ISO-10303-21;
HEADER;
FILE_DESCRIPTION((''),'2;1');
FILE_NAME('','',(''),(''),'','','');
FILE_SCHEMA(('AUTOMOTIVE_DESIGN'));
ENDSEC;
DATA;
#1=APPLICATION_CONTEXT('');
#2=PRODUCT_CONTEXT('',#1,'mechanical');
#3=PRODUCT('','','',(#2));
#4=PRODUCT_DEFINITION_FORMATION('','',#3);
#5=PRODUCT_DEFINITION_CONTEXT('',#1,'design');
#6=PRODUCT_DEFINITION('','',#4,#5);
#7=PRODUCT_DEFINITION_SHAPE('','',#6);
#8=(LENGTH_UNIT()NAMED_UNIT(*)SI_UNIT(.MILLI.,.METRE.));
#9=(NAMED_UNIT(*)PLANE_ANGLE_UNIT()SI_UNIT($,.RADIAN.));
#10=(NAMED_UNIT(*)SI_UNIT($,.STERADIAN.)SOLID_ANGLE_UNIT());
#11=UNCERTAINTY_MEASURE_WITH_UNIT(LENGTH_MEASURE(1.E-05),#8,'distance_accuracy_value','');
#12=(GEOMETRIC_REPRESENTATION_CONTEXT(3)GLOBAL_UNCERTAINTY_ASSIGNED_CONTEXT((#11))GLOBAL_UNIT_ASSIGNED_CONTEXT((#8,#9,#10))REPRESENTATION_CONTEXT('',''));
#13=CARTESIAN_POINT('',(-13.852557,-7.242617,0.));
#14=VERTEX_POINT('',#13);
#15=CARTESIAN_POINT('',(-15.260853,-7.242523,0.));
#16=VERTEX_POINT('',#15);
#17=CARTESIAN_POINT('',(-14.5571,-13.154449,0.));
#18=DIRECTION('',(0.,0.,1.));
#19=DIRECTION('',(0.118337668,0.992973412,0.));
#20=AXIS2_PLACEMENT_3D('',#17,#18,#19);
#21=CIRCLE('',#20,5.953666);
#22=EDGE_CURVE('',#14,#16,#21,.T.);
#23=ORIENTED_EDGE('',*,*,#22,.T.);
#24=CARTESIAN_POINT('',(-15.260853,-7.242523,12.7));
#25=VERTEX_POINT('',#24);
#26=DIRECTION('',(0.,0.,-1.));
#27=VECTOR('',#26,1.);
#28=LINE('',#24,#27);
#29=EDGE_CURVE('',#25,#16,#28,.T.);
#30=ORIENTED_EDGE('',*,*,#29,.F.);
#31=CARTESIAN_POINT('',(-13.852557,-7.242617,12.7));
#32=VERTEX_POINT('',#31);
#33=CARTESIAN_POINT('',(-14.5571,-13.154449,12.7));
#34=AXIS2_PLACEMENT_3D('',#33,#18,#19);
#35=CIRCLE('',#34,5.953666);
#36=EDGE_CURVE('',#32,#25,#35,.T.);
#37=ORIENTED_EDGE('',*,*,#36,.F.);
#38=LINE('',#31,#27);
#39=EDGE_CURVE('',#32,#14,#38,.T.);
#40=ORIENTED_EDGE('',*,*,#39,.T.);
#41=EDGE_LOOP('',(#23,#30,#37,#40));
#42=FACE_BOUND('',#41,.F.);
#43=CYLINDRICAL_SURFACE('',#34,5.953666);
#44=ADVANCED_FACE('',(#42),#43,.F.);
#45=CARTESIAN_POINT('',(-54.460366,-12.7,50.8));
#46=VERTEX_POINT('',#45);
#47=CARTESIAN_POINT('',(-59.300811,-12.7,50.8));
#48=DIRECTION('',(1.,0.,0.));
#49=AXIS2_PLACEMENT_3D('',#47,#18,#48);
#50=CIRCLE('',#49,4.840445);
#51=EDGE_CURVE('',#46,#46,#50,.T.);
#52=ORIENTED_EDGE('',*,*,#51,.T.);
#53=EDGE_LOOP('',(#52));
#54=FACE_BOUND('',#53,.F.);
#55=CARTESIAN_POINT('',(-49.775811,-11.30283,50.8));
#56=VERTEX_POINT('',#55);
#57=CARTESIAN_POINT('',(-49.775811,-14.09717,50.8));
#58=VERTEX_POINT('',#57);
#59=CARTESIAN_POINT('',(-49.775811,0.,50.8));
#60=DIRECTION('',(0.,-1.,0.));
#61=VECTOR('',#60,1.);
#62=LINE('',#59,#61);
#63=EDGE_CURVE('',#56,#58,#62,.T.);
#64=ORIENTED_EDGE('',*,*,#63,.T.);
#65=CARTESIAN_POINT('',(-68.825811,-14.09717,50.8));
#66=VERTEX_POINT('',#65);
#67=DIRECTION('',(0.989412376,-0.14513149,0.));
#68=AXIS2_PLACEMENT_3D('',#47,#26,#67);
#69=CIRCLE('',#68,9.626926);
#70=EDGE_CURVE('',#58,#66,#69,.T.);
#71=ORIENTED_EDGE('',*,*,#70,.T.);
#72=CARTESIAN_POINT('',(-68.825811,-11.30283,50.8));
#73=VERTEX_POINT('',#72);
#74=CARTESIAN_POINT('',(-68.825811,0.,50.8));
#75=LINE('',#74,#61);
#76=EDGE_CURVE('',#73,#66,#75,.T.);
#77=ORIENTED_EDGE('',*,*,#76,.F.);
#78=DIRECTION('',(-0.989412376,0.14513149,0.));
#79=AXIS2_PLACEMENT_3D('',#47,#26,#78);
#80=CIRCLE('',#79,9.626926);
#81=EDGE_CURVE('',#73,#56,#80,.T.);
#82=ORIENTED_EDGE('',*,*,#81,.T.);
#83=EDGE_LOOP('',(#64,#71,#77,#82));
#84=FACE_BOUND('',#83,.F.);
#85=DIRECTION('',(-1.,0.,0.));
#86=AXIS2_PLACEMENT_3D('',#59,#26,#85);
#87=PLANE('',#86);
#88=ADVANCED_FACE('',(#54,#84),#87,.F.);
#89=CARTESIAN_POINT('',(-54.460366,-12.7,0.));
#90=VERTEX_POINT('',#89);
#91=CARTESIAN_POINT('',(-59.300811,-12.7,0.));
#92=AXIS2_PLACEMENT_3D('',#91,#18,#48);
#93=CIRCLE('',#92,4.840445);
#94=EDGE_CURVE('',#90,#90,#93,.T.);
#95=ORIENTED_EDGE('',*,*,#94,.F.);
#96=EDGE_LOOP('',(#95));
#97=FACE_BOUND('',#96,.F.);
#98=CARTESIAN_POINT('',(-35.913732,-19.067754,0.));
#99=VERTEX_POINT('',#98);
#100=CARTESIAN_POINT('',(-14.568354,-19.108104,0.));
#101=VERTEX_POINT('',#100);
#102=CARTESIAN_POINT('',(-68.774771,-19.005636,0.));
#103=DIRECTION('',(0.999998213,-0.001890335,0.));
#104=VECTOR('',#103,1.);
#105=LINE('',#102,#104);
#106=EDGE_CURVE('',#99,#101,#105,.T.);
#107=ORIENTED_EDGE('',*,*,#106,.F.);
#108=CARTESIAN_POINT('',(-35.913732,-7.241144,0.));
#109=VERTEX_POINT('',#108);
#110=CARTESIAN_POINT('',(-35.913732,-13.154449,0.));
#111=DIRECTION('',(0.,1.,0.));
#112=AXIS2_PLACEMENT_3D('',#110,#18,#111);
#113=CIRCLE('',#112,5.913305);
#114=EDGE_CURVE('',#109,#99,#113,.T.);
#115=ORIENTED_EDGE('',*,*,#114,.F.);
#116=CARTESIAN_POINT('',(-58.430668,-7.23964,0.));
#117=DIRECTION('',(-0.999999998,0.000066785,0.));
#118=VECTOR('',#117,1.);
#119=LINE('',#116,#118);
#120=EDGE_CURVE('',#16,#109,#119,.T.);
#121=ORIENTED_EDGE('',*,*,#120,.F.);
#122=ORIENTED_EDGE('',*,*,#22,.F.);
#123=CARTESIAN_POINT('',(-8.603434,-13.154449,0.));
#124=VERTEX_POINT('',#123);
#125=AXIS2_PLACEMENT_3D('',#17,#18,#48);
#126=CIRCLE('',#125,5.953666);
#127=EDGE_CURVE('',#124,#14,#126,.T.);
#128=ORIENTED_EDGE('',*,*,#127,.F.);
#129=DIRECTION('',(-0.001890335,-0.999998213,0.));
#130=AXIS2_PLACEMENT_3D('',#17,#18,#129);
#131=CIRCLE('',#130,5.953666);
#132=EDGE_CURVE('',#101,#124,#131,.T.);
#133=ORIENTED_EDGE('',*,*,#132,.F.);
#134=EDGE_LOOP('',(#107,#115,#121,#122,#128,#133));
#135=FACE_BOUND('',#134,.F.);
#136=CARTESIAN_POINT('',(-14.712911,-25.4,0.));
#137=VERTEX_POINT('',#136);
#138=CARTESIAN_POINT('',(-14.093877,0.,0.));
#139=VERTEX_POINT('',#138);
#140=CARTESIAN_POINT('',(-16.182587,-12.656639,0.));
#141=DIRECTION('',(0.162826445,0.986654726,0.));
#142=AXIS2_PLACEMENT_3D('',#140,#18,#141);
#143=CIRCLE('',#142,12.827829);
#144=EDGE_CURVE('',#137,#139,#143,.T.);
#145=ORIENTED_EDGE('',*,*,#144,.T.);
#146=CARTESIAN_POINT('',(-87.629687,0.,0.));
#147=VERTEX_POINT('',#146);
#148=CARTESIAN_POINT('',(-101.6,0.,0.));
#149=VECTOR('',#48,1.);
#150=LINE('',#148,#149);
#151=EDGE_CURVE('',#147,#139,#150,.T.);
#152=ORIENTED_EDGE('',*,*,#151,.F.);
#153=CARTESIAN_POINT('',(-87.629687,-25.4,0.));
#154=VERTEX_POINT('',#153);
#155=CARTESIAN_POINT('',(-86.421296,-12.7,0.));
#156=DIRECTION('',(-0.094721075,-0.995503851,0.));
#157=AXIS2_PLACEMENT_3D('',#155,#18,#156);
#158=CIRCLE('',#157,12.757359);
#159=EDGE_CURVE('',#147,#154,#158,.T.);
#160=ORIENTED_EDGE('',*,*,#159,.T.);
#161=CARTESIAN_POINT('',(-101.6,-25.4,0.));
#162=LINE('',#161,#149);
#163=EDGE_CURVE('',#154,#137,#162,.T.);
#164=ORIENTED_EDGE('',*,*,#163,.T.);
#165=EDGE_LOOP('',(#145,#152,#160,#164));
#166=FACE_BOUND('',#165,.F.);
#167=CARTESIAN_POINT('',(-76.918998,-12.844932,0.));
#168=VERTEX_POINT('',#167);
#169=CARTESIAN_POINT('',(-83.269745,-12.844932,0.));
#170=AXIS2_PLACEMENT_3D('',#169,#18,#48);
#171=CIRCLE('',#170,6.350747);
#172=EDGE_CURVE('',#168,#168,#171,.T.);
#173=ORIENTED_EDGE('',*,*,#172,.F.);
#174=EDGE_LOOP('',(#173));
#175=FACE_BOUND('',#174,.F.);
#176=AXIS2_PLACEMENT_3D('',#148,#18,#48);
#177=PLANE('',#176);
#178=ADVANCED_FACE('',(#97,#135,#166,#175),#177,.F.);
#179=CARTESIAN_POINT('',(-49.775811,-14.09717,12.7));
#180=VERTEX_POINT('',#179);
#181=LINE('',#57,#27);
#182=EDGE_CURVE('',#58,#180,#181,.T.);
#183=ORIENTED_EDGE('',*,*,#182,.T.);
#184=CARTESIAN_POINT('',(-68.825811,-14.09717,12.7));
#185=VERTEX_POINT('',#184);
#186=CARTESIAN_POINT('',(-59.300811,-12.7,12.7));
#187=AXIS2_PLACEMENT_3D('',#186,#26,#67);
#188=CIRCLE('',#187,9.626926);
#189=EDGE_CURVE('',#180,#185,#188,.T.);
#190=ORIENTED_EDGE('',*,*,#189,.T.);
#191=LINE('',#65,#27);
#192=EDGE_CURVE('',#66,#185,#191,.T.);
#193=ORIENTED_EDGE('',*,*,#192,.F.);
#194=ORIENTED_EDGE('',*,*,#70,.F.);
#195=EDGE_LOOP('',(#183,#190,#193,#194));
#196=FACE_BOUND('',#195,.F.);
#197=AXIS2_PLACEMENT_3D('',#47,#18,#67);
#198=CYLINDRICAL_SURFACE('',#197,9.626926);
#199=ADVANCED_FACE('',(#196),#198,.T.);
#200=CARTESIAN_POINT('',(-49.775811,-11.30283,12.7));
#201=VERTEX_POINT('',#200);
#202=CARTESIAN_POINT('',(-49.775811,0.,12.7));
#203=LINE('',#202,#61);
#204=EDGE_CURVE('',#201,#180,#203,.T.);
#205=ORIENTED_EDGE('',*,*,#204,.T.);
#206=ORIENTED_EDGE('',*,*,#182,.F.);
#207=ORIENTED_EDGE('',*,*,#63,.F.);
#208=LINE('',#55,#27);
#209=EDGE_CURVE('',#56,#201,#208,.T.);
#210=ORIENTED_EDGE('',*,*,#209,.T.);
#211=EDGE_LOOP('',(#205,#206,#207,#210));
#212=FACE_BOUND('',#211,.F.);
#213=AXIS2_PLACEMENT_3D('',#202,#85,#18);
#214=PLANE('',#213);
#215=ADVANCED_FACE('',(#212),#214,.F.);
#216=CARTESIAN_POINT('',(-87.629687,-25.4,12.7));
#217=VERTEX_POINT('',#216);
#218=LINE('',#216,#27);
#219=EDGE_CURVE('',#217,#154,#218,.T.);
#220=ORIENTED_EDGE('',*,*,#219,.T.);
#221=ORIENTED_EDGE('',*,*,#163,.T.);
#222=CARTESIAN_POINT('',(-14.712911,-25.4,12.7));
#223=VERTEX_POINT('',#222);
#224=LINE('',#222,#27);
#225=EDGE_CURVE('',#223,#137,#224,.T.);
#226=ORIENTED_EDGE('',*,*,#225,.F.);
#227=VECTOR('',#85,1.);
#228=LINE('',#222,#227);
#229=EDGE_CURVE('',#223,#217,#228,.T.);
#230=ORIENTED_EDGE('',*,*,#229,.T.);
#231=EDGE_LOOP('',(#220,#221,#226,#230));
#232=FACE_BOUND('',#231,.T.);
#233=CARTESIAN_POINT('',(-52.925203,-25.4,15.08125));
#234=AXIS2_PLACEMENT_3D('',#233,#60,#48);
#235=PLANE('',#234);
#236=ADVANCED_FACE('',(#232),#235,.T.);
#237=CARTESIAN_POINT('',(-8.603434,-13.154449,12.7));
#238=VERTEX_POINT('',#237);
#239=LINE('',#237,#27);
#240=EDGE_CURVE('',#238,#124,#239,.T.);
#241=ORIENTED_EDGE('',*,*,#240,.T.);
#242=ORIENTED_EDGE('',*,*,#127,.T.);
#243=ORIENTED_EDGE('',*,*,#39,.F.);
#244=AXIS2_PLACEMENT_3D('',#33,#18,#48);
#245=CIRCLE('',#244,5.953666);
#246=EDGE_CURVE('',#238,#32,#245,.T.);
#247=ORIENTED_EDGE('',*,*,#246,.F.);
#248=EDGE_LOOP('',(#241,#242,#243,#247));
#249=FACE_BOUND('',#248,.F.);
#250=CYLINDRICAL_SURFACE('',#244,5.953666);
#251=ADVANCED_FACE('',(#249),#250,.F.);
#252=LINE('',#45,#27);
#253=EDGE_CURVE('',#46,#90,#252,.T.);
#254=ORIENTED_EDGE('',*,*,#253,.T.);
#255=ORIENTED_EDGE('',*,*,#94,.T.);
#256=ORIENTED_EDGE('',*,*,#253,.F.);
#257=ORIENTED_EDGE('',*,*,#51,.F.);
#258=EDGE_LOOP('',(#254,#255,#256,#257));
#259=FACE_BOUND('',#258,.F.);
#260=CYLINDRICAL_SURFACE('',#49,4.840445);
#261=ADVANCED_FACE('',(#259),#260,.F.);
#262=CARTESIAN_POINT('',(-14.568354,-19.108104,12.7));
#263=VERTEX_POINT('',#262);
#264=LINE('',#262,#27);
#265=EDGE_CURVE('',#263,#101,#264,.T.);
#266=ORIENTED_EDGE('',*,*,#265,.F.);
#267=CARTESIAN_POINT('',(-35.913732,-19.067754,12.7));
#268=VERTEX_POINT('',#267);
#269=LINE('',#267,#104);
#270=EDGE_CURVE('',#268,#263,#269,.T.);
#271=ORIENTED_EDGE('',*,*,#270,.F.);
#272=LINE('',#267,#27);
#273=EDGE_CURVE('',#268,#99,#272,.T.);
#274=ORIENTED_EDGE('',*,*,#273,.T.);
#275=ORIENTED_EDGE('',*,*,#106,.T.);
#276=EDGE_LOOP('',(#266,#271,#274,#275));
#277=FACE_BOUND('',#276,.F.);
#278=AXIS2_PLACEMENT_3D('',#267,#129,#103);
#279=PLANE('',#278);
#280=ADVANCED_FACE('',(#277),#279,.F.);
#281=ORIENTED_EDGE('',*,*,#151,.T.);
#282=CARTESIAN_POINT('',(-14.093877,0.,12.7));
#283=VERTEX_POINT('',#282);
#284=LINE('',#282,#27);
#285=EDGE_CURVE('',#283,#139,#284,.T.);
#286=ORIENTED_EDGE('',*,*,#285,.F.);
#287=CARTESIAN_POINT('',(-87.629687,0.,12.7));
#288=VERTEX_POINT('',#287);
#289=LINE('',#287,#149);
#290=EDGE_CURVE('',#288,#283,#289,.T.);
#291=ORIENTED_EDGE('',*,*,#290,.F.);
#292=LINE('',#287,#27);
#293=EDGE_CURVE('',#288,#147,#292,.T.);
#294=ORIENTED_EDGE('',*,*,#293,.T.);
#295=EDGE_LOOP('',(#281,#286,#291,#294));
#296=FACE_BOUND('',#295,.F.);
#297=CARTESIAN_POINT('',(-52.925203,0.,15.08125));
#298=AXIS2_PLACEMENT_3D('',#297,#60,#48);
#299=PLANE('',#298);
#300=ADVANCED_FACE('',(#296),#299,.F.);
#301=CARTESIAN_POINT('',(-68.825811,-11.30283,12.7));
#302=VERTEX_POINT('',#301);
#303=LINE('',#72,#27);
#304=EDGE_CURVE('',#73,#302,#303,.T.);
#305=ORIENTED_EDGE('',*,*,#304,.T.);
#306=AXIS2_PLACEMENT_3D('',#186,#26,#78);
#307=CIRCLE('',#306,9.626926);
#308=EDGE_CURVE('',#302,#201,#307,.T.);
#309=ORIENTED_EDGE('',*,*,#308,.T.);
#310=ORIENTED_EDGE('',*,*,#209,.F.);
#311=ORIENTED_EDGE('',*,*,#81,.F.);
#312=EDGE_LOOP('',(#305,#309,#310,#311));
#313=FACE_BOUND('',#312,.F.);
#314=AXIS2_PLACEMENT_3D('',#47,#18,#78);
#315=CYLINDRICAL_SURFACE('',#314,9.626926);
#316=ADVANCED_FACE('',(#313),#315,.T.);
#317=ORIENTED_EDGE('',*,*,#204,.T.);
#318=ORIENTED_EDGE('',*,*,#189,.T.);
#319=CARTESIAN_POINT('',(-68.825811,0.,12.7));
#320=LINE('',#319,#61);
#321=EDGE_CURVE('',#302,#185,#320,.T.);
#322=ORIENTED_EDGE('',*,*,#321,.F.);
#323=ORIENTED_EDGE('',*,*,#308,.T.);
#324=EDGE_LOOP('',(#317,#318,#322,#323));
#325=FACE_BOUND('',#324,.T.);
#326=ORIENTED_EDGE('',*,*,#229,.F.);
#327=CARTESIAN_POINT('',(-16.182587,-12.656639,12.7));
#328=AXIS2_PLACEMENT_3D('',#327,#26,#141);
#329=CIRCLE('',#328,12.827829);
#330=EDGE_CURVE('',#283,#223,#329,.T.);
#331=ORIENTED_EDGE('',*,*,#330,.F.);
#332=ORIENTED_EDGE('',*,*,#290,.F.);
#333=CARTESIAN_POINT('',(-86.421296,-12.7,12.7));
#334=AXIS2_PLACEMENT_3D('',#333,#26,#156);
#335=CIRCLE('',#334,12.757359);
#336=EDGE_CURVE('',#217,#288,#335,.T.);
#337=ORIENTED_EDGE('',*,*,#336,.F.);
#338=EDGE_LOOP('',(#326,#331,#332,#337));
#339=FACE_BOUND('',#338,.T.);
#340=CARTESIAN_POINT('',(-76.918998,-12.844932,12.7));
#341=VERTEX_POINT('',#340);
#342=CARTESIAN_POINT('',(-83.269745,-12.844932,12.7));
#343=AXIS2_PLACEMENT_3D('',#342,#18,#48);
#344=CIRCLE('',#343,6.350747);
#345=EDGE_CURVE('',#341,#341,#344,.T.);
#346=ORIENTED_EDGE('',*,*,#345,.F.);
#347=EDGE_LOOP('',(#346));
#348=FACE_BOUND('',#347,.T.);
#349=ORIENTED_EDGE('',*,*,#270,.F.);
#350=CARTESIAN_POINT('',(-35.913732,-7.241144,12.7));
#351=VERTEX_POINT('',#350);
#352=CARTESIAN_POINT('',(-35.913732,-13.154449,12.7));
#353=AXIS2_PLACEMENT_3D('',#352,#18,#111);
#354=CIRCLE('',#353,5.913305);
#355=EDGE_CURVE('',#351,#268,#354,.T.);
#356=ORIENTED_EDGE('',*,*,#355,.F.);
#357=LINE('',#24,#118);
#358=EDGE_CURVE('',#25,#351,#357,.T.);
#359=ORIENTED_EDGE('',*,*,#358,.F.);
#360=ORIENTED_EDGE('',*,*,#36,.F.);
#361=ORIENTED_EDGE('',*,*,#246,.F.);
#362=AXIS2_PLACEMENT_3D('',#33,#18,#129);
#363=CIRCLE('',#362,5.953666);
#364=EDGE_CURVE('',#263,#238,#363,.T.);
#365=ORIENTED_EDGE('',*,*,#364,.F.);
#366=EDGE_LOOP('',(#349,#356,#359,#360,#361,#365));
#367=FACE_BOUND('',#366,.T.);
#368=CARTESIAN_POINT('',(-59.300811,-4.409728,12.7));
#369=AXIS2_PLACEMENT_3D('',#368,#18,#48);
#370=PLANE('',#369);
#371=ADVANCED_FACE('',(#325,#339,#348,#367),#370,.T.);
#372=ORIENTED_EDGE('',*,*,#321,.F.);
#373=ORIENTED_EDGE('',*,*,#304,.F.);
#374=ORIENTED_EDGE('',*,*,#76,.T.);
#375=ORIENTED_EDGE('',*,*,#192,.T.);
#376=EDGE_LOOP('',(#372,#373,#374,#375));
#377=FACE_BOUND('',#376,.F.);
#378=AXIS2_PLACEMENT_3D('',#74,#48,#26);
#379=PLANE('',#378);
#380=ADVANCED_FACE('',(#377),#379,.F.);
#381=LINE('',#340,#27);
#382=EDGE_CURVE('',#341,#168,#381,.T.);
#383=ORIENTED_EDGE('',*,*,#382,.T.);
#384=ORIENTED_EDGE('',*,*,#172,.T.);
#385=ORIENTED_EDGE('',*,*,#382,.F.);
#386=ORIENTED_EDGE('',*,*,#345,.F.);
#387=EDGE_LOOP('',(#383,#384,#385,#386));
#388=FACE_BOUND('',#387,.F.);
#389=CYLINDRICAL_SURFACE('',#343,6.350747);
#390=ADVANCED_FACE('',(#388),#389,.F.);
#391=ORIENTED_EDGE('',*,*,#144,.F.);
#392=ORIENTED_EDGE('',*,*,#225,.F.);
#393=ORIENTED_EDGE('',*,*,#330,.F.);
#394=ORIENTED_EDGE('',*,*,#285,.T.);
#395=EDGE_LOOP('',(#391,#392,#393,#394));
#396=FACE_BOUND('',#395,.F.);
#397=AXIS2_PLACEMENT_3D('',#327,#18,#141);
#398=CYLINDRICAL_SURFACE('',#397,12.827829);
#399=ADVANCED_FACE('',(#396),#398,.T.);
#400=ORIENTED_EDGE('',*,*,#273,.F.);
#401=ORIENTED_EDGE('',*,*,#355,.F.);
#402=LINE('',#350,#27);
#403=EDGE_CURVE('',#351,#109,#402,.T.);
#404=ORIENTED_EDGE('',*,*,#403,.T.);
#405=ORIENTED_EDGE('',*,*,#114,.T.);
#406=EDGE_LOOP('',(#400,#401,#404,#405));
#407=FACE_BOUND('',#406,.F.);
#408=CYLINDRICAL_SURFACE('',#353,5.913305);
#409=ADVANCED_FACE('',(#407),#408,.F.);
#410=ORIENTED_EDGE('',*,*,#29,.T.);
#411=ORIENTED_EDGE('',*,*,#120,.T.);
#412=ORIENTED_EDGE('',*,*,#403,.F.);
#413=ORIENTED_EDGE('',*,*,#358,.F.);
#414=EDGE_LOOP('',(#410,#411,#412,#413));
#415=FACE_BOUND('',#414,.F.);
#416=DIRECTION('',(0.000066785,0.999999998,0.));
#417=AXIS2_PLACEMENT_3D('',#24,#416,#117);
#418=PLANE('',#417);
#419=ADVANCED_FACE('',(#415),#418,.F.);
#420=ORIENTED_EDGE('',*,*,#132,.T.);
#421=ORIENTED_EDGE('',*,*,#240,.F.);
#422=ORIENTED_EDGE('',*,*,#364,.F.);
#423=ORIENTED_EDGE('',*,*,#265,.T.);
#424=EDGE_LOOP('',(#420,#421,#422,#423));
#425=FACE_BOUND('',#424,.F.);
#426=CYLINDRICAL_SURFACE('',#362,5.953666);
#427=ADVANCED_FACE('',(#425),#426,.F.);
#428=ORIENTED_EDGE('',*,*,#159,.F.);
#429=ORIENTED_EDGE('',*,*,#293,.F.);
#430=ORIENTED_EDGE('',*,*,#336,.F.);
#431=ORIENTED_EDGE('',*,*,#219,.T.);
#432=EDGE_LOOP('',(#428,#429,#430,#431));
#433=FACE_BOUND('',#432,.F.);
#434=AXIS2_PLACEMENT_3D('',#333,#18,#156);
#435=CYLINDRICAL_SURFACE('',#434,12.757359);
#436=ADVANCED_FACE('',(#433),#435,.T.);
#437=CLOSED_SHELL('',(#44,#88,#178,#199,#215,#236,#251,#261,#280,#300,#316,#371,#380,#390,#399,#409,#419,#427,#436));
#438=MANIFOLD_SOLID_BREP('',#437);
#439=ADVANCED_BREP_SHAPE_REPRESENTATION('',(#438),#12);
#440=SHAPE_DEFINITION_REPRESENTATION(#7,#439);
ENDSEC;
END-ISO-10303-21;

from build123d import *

# Parameters (mm, degrees)
F1_DEPTH  = 25.4
F2_R      = 4.8404450777
F3_DEPTH  = 50.8
F5_DEPTH  = 25.4
F6_DEPTH  = 25.4
F7_R      = 6.3507472709
F8_DEPTH  = 25.4
F10_DEPTH = 38.1
F11_DEPTH = 25.4
F12_DEPTH = 25.4


# Not quite as in the source:
# - a feature names something its author has since deleted; it is built from what else it names


with BuildPart() as f1:
    # F0 (on Front) → F1 (new body)
    with BuildSketch(Plane.XZ):
        Polygon((-101.6, 0), (0, 0), (0, 12.7), (-49.7758105871, 12.7), (-49.7758105871, 50.8), (-68.8258105871, 50.8), (-68.8258105871, 12.7), (-101.6, 12.7), align=None)
    extrude(amount=F1_DEPTH)

    # F2 (on face) → F3 (cut)
    with BuildSketch(Plane.XY.offset(50.8)):
        with Locations((-59.3008105871, -12.7)):
            Circle(F2_R)
    extrude(amount=-F3_DEPTH, mode=Mode.SUBTRACT)

    # F4 (on face) → F5 (cut)
    with BuildSketch(Plane.XY.offset(12.7)):
        with BuildLine():
            ThreePointArc((-35.9137319028, -19.0677542063), (-31.7323936508, -17.3357871934), (-30.0004266379, -13.1544489413))
            ThreePointArc((-30.0004266379, -13.1544489413), (-31.7323936508, -8.9731106893), (-35.9137319028, -7.2411436764))
            ThreePointArc((-35.9137319028, -7.2411436764), (-41.8270371678, -13.1544489413), (-35.9137319028, -19.0677542063))
        make_face()
        with BuildLine():
            ThreePointArc((-35.9137319028, -7.2411436764), (-31.7323936508, -8.9731106893), (-30.0004266379, -13.1544489413))
            ThreePointArc((-30.0004266379, -13.1544489413), (-31.7323936508, -17.3357871934), (-35.9137319028, -19.0677542063))
            Line((-35.9137319028, -19.0677542063), (-14.5683543234, -19.1081041901))
            ThreePointArc((-14.5683543234, -19.1081041901), (-20.5006521622, -13.5013264467), (-15.2608531919, -7.2425229617))
            Line((-15.2608531919, -7.2425229617), (-35.9137319028, -7.2411436632))
        make_face()
        with BuildLine():
            Line((-13.852556963, -7.2426170145), (-15.2608531919, -7.2425229617))
            ThreePointArc((-15.2608531919, -7.2425229617), (-20.5006521622, -13.5013264467), (-14.5683543234, -19.1081041901))
            ThreePointArc((-14.5683543234, -19.1081041901), (-10.3512033015, -17.3683036228), (-8.603434015, -13.1544489413))
            ThreePointArc((-8.603434015, -13.1544489413), (-10.1050918857, -9.2015054667), (-13.852556963, -7.2426170145))
        make_face()
        with BuildLine():
            ThreePointArc((-13.852556963, -7.2426170145), (-14.5567022867, -7.2007830685), (-15.2608531919, -7.2425229617))
            Line((-15.2608531919, -7.2425229617), (-13.852556963, -7.2426170145))
        make_face()
        with BuildLine():
            ThreePointArc((-14.0938774664, 0), (-3.3585658021, -12.9691778388), (-14.712910818, -25.4))
            Line((-14.712910818, -25.4), (0, -25.4))
            Line((0, -25.4), (0, 0))
            Line((0, 0), (-14.0938774664, 0))
        make_face()
    extrude(amount=-F5_DEPTH, mode=Mode.SUBTRACT)

    # F4 (on face) → F6 (cut)
    with BuildSketch(Plane.XY.offset(12.7)):
        with BuildLine():
            ThreePointArc((-35.9137319028, -19.0677542063), (-31.7323936508, -17.3357871934), (-30.0004266379, -13.1544489413))
            ThreePointArc((-30.0004266379, -13.1544489413), (-31.7323936508, -8.9731106893), (-35.9137319028, -7.2411436764))
            ThreePointArc((-35.9137319028, -7.2411436764), (-41.8270371678, -13.1544489413), (-35.9137319028, -19.0677542063))
        make_face()
        with BuildLine():
            ThreePointArc((-35.9137319028, -7.2411436764), (-31.7323936508, -8.9731106893), (-30.0004266379, -13.1544489413))
            ThreePointArc((-30.0004266379, -13.1544489413), (-31.7323936508, -17.3357871934), (-35.9137319028, -19.0677542063))
            Line((-35.9137319028, -19.0677542063), (-14.5683543234, -19.1081041901))
            ThreePointArc((-14.5683543234, -19.1081041901), (-20.5006521622, -13.5013264467), (-15.2608531919, -7.2425229617))
            Line((-15.2608531919, -7.2425229617), (-35.9137319028, -7.2411436632))
        make_face()
        with BuildLine():
            Line((-13.852556963, -7.2426170145), (-15.2608531919, -7.2425229617))
            ThreePointArc((-15.2608531919, -7.2425229617), (-20.5006521622, -13.5013264467), (-14.5683543234, -19.1081041901))
            ThreePointArc((-14.5683543234, -19.1081041901), (-10.3512033015, -17.3683036228), (-8.603434015, -13.1544489413))
            ThreePointArc((-8.603434015, -13.1544489413), (-10.1050918857, -9.2015054667), (-13.852556963, -7.2426170145))
        make_face()
        with BuildLine():
            ThreePointArc((-13.852556963, -7.2426170145), (-14.5567022867, -7.2007830685), (-15.2608531919, -7.2425229617))
            Line((-15.2608531919, -7.2425229617), (-13.852556963, -7.2426170145))
        make_face()
    extrude(amount=-F6_DEPTH, mode=Mode.SUBTRACT)

    # F7 (on face) → F8 (cut)
    with BuildSketch(Plane.XY.offset(12.7)):
        with Locations((-83.2697451115, -12.8449322656)):
            Circle(F7_R)
        with BuildLine():
            ThreePointArc((-87.6296867998, -25.4), (-99.1786550293, -12.7), (-87.6296867998, 0))
            Line((-87.6296867998, 0), (-101.6, 0))
            Line((-101.6, 0), (-101.6, -25.4))
            Line((-101.6, -25.4), (-87.6296867998, -25.4))
        make_face()
    extrude(amount=-F8_DEPTH, mode=Mode.SUBTRACT)

    # F9 (on face) → F10 (cut)
    with BuildSketch(Plane.XY.offset(50.8)):
        with BuildLine():
            ThreePointArc((-68.8258105871, -11.3028298429), (-59.3008105871, -3.0730737279), (-49.7758105871, -11.3028298429))
            Line((-49.7758105871, -11.3028298429), (-49.7758105871, 0))
            Line((-49.7758105871, 0), (-68.8258105871, 0))
            Line((-68.8258105871, 0), (-68.8258105871, -11.3028298429))
        make_face()
        with BuildLine():
            Line((-49.7758105871, -25.4), (-49.7758105871, -14.0971701571))
            ThreePointArc((-49.7758105871, -14.0971701571), (-59.3008105871, -22.3269262721), (-68.8258105871, -14.0971701571))
            Line((-68.8258105871, -14.0971701571), (-68.8258105871, -25.4))
            Line((-68.8258105871, -25.4), (-49.7758105871, -25.4))
        make_face()
    extrude(amount=-F10_DEPTH, mode=Mode.SUBTRACT)


with BuildPart() as f11:
    # F7 (on face) → F11 (new body)
    with BuildSketch(Plane.XY.offset(12.7)):
        with Locations((-83.2697451115, -12.8449322656)):
            Circle(F7_R)
    extrude(amount=F11_DEPTH)

    # F12 (cut): a face of the model
    f12_faces = [f11.faces().sort_by_distance(p)[0] for p in [
        (-83.2697451115, -12.8449322656, 38.1),
    ]]
    extrude(f12_faces, amount=-F12_DEPTH, mode=Mode.SUBTRACT)


solid = f1.part
